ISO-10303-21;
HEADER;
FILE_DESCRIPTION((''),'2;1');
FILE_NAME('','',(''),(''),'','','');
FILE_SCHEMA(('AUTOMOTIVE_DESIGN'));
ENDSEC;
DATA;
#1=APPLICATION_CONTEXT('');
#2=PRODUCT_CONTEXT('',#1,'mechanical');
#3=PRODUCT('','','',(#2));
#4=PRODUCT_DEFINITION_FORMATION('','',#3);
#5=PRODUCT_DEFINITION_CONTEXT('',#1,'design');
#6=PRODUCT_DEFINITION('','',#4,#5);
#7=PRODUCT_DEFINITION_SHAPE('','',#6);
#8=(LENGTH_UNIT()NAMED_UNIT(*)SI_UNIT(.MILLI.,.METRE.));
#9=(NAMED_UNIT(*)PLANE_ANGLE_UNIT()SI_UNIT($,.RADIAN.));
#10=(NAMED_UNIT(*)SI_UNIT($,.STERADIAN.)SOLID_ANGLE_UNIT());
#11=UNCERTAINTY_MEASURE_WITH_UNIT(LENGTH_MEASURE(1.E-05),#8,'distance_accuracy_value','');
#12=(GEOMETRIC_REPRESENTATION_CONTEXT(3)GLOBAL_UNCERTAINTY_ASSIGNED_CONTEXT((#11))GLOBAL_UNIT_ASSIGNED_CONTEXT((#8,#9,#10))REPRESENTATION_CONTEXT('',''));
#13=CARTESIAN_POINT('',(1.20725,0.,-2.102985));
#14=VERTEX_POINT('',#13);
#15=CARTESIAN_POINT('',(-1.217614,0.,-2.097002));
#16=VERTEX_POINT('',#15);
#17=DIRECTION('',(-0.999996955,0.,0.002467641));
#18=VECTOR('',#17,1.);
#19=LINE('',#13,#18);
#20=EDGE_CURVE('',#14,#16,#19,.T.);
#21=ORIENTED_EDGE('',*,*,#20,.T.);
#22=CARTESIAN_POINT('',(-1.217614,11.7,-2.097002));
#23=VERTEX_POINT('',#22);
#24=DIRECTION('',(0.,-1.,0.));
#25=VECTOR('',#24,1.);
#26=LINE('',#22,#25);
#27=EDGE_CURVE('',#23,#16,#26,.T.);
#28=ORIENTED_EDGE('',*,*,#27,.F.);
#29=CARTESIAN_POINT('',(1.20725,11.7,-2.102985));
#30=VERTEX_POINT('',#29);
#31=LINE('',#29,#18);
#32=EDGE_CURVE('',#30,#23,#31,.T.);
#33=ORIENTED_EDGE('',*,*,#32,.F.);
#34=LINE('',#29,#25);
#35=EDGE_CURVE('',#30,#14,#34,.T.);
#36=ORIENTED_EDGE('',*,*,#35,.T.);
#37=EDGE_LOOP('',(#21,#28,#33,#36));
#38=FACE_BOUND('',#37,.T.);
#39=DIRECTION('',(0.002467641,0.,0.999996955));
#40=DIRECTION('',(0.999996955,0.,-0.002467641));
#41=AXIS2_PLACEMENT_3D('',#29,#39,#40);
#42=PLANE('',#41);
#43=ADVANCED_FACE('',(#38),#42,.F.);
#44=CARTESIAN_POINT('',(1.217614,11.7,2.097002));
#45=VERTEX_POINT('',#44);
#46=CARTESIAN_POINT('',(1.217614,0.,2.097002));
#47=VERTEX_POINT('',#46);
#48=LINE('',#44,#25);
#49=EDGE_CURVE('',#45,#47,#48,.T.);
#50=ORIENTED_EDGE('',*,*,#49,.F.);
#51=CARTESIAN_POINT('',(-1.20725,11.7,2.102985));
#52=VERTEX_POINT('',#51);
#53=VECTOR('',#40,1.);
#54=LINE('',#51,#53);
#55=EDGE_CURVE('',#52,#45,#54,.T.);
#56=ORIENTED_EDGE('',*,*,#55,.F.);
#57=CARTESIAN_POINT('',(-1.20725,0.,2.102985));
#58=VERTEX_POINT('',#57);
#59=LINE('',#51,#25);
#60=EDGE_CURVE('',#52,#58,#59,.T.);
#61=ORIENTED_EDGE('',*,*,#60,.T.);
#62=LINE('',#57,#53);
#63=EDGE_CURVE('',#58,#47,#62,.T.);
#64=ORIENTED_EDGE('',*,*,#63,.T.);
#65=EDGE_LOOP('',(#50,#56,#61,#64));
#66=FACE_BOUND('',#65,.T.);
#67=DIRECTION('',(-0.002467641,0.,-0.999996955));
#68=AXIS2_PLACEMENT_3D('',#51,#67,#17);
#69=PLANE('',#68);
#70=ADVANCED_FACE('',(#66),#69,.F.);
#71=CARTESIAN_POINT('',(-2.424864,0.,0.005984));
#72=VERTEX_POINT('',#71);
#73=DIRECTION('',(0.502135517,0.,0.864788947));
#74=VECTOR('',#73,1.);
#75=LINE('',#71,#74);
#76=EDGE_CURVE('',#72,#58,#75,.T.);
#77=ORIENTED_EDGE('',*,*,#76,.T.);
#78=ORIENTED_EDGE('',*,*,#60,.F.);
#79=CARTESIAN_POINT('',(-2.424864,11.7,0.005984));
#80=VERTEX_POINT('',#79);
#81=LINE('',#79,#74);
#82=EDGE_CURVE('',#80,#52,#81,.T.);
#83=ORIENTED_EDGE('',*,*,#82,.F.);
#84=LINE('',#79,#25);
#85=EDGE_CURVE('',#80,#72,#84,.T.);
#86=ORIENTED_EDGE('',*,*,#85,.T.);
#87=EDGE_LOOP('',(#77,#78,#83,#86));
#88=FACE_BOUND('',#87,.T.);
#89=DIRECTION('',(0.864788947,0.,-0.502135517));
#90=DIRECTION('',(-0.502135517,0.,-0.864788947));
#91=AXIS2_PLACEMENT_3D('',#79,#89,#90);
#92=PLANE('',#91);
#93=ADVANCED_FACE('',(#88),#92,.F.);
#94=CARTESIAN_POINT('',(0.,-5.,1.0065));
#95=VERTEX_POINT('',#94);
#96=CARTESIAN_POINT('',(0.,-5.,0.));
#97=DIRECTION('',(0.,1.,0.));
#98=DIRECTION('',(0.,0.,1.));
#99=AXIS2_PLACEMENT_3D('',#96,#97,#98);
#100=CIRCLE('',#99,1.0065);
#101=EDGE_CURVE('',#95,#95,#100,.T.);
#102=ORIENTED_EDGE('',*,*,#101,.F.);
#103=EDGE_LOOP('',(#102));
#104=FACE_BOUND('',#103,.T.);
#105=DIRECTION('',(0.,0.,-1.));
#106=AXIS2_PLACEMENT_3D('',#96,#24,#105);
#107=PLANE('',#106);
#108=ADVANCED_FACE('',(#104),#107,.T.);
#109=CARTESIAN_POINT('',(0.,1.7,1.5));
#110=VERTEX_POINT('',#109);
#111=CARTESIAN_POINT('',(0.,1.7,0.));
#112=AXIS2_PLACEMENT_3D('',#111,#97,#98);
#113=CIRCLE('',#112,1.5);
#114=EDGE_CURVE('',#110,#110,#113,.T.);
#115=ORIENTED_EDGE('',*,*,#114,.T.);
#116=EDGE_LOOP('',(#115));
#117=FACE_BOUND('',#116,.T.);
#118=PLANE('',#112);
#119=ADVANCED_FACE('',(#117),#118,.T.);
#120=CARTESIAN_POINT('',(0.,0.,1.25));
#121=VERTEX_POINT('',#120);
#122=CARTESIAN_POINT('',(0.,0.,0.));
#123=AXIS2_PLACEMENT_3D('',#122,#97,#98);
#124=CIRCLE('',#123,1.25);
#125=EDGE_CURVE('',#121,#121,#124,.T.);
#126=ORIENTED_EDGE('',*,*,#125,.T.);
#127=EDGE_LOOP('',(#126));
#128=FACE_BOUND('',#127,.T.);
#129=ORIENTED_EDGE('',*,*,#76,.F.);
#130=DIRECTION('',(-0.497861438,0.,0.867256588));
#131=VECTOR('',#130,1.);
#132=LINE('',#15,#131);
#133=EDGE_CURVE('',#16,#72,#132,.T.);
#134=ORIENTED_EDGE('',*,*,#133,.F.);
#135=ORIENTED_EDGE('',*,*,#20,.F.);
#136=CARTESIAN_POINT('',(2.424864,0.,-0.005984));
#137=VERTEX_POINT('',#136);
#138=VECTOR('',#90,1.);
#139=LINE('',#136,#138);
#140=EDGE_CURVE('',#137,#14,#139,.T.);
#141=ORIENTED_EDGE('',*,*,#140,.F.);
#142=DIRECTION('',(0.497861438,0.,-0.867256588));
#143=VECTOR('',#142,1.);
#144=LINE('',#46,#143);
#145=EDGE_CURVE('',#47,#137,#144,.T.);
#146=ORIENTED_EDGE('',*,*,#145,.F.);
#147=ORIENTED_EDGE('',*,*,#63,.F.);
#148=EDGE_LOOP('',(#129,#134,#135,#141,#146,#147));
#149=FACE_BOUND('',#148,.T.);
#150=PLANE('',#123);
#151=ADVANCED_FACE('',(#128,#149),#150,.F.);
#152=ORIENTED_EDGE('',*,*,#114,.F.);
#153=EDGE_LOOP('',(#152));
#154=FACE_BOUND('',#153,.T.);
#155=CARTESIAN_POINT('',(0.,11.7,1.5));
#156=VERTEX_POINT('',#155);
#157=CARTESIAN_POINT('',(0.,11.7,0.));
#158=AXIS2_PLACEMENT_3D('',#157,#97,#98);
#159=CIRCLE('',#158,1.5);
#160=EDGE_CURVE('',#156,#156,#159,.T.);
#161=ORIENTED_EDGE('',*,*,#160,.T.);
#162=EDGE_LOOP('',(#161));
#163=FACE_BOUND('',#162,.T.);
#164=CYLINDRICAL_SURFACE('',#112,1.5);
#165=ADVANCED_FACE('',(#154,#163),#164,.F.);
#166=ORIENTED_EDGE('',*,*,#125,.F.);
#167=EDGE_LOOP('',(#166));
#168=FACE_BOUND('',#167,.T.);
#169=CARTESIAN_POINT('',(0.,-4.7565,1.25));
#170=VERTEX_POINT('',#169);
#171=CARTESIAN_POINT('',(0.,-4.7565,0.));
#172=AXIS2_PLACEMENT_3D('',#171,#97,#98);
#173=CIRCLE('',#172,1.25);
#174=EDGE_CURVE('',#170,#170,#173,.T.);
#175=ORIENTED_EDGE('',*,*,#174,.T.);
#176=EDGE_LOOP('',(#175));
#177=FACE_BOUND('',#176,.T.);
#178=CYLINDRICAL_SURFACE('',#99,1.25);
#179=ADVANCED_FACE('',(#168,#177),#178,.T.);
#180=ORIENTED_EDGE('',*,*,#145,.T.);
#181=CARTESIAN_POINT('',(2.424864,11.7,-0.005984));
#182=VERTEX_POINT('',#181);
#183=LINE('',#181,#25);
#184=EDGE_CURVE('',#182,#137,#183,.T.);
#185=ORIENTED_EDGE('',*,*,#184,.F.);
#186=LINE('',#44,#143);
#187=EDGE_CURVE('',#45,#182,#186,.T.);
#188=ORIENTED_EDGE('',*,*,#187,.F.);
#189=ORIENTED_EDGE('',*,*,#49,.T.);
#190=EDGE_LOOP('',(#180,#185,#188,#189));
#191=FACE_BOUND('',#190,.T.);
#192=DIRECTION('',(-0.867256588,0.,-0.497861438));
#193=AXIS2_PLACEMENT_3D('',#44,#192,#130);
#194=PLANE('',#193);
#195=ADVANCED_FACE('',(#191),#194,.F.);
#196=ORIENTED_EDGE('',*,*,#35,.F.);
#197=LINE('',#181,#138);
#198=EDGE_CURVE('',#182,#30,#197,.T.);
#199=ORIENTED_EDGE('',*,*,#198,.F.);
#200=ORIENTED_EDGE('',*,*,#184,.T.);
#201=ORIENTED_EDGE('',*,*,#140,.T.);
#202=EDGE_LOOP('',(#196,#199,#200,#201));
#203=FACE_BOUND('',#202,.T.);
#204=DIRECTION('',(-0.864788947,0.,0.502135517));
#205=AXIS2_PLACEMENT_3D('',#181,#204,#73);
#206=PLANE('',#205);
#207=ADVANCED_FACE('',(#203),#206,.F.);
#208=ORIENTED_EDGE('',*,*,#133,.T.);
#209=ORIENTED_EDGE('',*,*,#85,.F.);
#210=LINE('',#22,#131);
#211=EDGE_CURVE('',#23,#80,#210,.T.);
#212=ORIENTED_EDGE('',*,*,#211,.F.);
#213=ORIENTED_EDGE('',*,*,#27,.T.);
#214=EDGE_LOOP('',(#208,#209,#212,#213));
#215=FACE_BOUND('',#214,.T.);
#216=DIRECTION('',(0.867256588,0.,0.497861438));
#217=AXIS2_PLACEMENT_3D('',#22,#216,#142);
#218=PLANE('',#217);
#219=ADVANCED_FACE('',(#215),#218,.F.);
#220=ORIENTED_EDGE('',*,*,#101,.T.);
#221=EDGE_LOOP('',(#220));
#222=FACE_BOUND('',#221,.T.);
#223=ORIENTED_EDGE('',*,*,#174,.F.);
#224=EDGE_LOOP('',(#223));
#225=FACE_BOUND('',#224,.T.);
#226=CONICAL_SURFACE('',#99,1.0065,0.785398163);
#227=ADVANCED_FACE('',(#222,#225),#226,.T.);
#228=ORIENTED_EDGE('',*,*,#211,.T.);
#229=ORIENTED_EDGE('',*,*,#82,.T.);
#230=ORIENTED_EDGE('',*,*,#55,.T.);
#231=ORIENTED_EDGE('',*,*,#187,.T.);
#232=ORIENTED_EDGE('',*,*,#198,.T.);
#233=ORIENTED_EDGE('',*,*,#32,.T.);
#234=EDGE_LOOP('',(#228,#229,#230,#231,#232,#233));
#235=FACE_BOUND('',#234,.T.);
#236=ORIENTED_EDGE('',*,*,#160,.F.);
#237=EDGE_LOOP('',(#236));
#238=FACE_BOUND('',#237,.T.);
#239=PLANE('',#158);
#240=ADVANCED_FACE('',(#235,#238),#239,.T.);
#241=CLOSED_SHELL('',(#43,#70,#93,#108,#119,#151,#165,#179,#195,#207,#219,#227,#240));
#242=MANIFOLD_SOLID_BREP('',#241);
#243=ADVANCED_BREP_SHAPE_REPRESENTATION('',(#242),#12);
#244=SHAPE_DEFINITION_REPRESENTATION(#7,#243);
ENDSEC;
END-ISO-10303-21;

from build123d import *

# Parameters (mm, degrees)
EXTRUDE_1_DEPTH     = 11.7
SKETCH_2_R          = 1.5
CUT_EXTRUDE_1_DEPTH = 10
SKETCH_3_R          = 1.5
EXTRUDE_2_DEPTH     = 5


# Read off the part's stored shape, not the designer's step: M2.5 机械螺纹 螺柱1
with BuildPart() as part:
    # 草图1 → 凸台-拉伸1 (new body)
    with BuildSketch(Plane(origin=(0, 0, 0), x_dir=(1, 0, 0), z_dir=(0, 1, 0))):
        Polygon((-1.21761392, 2.097001751), (-2.424863748, -0.005983711), (-1.207249828, -2.102985462), (1.21761392, -2.097001751), (2.424863748, 0.005983711), (1.207249828, 2.102985462), align=None)
    extrude(amount=EXTRUDE_1_DEPTH)

    # 草图2 → 切除-拉伸1 (cut)
    with BuildSketch(Plane(origin=(0, 11.7, 0), x_dir=(1, 0, 0), z_dir=(0, 1, 0))):
        with Locations(Location((0, 0, 0), (0, 0, 270))):
            Circle(SKETCH_2_R)
    extrude(amount=-CUT_EXTRUDE_1_DEPTH, mode=Mode.SUBTRACT)

    # 草图3 → 凸台-拉伸2 (add)
    with BuildSketch(Plane.XZ):
        with Locations(Location((0, 0, 0), (0, 0, 90))):
            Circle(SKETCH_3_R)
    extrude(amount=EXTRUDE_2_DEPTH)

    # M2.5 机械螺纹 螺柱1 outline → M2.5 机械螺纹 螺柱1 (revolve, cut)
    with BuildSketch(Plane.XY):
        Polygon((1.5, 0), (1.25, 0), (1.25, -4.7565), (1.0065, -5), (1.5, -5), align=None)
    revolve(axis=Axis((0, 0, 0), (0, 1, 0)), mode=Mode.SUBTRACT)


solid = part.part
